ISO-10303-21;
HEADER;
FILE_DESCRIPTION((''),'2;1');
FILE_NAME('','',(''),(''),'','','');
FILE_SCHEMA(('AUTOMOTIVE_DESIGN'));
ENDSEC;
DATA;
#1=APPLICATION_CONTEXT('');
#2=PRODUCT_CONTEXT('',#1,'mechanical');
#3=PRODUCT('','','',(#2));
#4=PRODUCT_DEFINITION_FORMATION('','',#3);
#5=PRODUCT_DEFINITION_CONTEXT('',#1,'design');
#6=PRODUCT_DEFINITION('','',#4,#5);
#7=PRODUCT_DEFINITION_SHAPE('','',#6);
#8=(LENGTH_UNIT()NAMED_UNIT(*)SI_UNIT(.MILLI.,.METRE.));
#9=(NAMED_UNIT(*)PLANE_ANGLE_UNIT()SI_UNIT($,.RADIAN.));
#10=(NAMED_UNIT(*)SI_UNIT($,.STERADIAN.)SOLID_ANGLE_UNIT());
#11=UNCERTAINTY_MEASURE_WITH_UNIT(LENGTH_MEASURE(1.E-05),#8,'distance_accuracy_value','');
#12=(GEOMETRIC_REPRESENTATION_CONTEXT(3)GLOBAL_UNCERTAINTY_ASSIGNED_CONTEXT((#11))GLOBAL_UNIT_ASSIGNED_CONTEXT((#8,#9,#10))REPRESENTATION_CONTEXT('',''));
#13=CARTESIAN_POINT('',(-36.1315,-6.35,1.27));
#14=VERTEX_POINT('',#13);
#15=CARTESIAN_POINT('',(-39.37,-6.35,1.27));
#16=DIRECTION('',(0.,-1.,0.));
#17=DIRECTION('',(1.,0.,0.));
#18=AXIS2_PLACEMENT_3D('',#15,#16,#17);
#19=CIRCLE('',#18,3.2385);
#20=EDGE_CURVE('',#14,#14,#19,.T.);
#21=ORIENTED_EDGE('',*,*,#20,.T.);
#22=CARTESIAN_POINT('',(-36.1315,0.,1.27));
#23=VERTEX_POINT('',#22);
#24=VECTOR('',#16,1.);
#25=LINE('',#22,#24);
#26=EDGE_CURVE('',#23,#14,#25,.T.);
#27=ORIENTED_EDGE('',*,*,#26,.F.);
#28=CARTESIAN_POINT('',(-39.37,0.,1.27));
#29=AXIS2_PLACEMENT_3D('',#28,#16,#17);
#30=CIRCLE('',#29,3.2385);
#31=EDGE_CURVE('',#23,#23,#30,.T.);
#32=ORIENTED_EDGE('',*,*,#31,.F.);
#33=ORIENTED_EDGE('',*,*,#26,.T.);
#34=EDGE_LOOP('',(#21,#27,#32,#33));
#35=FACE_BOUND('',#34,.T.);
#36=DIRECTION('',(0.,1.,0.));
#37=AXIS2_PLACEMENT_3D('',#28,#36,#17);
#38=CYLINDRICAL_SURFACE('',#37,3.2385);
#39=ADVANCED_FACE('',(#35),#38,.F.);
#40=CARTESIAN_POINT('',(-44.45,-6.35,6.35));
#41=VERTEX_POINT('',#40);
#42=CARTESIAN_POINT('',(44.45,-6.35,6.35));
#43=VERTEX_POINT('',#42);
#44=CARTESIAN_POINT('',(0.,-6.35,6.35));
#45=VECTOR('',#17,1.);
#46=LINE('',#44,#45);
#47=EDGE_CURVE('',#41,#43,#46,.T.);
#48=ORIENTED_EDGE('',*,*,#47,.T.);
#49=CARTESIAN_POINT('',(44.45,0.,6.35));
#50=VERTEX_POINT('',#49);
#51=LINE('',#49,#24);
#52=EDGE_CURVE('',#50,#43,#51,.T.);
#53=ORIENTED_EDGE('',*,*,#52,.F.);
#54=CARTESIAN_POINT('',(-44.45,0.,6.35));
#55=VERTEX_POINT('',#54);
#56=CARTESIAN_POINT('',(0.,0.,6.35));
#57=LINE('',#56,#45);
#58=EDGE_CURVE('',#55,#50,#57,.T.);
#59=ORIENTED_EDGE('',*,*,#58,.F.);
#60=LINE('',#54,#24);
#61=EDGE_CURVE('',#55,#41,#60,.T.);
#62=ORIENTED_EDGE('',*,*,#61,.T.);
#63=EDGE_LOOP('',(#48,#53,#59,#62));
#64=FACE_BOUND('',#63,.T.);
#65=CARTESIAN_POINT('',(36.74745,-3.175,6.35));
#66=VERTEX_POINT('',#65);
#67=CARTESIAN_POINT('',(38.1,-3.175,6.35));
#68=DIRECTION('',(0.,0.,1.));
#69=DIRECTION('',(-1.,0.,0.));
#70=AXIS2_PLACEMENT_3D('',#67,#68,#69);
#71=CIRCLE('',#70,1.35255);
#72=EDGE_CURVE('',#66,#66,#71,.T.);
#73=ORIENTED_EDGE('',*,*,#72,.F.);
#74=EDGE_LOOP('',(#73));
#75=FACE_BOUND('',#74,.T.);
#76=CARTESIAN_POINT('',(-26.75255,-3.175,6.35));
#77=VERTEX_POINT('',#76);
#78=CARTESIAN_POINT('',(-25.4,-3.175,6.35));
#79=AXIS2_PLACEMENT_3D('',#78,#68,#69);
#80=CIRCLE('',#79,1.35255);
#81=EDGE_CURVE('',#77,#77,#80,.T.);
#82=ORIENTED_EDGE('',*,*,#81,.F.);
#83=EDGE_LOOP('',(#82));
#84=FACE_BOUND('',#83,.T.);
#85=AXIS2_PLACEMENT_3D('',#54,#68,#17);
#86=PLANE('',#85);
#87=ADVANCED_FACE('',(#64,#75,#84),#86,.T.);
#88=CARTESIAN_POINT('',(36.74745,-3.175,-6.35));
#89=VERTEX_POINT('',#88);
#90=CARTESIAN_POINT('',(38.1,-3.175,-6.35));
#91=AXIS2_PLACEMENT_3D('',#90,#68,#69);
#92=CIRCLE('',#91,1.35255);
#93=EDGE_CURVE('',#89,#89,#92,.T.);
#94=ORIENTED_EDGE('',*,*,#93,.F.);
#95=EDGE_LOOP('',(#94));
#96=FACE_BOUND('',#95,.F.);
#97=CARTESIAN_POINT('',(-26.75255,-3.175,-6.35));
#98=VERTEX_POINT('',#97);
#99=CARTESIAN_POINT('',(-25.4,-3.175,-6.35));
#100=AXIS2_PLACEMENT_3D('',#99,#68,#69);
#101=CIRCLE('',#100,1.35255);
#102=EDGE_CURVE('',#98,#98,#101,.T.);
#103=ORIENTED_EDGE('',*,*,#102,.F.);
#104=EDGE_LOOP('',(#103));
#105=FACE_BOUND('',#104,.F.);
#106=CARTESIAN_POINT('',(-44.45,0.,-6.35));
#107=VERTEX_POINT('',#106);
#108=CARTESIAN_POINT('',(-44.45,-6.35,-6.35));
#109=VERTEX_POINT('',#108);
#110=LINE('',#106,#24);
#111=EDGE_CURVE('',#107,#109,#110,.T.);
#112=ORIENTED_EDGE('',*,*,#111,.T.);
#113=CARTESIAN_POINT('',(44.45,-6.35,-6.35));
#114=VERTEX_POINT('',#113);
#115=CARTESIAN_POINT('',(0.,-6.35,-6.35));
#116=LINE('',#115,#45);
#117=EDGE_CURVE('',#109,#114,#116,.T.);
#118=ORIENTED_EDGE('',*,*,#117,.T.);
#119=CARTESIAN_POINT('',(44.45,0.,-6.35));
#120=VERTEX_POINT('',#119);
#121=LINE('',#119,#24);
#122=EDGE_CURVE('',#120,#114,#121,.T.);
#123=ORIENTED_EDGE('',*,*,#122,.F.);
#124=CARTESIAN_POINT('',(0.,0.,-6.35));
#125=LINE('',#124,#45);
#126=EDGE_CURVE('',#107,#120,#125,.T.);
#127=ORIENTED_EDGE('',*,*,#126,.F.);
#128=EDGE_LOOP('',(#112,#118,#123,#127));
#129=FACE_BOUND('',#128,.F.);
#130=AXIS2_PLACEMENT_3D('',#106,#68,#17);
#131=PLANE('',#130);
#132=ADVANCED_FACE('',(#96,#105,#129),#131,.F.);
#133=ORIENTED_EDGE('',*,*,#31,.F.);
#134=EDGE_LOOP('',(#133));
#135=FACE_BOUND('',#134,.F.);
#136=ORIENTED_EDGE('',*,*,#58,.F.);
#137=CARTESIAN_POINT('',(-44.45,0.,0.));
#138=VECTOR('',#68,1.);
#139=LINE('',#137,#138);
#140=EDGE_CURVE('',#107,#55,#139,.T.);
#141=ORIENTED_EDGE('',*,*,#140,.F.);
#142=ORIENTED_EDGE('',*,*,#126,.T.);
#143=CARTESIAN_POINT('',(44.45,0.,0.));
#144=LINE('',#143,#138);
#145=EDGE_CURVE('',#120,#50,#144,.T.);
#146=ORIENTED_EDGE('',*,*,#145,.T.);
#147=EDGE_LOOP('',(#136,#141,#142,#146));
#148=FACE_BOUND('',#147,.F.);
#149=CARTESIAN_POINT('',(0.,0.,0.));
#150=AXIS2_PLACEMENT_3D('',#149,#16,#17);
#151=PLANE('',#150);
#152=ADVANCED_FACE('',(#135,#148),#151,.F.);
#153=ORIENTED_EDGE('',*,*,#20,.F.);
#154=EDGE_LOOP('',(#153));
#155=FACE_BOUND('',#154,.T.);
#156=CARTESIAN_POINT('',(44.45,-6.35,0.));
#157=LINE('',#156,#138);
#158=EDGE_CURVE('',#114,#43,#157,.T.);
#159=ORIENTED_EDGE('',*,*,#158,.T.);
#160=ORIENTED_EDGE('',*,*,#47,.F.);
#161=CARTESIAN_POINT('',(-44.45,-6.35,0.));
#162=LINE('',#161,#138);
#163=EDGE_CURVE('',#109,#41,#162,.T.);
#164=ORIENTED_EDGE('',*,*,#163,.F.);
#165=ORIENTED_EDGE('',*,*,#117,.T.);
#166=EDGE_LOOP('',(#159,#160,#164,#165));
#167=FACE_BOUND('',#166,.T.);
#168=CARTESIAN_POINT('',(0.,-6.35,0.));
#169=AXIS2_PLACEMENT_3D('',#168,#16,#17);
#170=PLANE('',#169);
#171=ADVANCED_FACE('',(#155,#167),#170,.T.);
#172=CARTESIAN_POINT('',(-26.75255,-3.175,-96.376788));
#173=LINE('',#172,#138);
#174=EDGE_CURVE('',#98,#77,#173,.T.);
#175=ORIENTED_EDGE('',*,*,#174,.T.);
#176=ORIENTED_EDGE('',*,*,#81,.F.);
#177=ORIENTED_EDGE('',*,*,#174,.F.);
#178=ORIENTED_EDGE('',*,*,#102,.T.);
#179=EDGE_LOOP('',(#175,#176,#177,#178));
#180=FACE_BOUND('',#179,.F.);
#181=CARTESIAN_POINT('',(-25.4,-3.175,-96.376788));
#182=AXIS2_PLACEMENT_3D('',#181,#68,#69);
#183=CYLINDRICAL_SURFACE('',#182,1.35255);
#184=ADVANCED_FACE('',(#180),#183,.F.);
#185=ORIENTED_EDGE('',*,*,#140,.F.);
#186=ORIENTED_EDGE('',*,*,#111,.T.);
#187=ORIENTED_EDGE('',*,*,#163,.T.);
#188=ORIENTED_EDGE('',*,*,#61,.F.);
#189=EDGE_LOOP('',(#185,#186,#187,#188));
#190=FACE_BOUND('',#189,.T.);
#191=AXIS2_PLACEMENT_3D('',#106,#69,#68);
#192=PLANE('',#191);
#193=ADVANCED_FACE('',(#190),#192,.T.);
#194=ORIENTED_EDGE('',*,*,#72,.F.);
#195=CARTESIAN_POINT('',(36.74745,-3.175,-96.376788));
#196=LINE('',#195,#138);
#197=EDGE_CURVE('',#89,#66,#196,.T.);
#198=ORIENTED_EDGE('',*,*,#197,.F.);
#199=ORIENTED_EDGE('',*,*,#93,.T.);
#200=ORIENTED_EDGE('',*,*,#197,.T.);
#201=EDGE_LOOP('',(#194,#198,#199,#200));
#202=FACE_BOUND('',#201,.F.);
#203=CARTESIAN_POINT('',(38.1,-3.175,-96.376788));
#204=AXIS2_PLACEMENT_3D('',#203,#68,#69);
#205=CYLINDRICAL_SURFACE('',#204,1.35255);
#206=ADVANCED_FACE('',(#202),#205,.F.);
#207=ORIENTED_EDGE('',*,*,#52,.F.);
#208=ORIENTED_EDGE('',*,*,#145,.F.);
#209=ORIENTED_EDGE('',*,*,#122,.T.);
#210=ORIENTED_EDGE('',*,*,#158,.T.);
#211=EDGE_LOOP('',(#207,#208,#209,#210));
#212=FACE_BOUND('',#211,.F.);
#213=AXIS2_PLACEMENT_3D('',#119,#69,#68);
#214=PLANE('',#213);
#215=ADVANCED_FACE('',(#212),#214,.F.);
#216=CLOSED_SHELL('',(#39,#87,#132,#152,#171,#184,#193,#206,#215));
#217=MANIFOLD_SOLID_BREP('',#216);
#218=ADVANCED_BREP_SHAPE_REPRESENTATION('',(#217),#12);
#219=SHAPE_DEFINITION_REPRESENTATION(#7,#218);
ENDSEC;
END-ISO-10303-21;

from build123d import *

# Parameters (mm, degrees)
F0_W     = 88.9
F0_H     = 12.7
F0_R     = 3.2385
F1_DEPTH = 6.35
F3_D     = 2.7051


with BuildPart() as f1:
    # F0 (on Front) → F1 (new body)
    with BuildSketch(Plane.XZ):
        Rectangle(F0_W, F0_H)
        with Locations((-39.37, 1.27)):
            Circle(F0_R, mode=Mode.SUBTRACT)
    extrude(amount=F1_DEPTH)

    # F3 (through all)
    with Locations(Plane(origin=(0, 0, -6.35), x_dir=(1, 0, 0), z_dir=(0, 0, -1))):
        with Locations((-25.4, 3.175), (38.1, 3.175)):
            Hole(F3_D / 2)


solid = f1.part
